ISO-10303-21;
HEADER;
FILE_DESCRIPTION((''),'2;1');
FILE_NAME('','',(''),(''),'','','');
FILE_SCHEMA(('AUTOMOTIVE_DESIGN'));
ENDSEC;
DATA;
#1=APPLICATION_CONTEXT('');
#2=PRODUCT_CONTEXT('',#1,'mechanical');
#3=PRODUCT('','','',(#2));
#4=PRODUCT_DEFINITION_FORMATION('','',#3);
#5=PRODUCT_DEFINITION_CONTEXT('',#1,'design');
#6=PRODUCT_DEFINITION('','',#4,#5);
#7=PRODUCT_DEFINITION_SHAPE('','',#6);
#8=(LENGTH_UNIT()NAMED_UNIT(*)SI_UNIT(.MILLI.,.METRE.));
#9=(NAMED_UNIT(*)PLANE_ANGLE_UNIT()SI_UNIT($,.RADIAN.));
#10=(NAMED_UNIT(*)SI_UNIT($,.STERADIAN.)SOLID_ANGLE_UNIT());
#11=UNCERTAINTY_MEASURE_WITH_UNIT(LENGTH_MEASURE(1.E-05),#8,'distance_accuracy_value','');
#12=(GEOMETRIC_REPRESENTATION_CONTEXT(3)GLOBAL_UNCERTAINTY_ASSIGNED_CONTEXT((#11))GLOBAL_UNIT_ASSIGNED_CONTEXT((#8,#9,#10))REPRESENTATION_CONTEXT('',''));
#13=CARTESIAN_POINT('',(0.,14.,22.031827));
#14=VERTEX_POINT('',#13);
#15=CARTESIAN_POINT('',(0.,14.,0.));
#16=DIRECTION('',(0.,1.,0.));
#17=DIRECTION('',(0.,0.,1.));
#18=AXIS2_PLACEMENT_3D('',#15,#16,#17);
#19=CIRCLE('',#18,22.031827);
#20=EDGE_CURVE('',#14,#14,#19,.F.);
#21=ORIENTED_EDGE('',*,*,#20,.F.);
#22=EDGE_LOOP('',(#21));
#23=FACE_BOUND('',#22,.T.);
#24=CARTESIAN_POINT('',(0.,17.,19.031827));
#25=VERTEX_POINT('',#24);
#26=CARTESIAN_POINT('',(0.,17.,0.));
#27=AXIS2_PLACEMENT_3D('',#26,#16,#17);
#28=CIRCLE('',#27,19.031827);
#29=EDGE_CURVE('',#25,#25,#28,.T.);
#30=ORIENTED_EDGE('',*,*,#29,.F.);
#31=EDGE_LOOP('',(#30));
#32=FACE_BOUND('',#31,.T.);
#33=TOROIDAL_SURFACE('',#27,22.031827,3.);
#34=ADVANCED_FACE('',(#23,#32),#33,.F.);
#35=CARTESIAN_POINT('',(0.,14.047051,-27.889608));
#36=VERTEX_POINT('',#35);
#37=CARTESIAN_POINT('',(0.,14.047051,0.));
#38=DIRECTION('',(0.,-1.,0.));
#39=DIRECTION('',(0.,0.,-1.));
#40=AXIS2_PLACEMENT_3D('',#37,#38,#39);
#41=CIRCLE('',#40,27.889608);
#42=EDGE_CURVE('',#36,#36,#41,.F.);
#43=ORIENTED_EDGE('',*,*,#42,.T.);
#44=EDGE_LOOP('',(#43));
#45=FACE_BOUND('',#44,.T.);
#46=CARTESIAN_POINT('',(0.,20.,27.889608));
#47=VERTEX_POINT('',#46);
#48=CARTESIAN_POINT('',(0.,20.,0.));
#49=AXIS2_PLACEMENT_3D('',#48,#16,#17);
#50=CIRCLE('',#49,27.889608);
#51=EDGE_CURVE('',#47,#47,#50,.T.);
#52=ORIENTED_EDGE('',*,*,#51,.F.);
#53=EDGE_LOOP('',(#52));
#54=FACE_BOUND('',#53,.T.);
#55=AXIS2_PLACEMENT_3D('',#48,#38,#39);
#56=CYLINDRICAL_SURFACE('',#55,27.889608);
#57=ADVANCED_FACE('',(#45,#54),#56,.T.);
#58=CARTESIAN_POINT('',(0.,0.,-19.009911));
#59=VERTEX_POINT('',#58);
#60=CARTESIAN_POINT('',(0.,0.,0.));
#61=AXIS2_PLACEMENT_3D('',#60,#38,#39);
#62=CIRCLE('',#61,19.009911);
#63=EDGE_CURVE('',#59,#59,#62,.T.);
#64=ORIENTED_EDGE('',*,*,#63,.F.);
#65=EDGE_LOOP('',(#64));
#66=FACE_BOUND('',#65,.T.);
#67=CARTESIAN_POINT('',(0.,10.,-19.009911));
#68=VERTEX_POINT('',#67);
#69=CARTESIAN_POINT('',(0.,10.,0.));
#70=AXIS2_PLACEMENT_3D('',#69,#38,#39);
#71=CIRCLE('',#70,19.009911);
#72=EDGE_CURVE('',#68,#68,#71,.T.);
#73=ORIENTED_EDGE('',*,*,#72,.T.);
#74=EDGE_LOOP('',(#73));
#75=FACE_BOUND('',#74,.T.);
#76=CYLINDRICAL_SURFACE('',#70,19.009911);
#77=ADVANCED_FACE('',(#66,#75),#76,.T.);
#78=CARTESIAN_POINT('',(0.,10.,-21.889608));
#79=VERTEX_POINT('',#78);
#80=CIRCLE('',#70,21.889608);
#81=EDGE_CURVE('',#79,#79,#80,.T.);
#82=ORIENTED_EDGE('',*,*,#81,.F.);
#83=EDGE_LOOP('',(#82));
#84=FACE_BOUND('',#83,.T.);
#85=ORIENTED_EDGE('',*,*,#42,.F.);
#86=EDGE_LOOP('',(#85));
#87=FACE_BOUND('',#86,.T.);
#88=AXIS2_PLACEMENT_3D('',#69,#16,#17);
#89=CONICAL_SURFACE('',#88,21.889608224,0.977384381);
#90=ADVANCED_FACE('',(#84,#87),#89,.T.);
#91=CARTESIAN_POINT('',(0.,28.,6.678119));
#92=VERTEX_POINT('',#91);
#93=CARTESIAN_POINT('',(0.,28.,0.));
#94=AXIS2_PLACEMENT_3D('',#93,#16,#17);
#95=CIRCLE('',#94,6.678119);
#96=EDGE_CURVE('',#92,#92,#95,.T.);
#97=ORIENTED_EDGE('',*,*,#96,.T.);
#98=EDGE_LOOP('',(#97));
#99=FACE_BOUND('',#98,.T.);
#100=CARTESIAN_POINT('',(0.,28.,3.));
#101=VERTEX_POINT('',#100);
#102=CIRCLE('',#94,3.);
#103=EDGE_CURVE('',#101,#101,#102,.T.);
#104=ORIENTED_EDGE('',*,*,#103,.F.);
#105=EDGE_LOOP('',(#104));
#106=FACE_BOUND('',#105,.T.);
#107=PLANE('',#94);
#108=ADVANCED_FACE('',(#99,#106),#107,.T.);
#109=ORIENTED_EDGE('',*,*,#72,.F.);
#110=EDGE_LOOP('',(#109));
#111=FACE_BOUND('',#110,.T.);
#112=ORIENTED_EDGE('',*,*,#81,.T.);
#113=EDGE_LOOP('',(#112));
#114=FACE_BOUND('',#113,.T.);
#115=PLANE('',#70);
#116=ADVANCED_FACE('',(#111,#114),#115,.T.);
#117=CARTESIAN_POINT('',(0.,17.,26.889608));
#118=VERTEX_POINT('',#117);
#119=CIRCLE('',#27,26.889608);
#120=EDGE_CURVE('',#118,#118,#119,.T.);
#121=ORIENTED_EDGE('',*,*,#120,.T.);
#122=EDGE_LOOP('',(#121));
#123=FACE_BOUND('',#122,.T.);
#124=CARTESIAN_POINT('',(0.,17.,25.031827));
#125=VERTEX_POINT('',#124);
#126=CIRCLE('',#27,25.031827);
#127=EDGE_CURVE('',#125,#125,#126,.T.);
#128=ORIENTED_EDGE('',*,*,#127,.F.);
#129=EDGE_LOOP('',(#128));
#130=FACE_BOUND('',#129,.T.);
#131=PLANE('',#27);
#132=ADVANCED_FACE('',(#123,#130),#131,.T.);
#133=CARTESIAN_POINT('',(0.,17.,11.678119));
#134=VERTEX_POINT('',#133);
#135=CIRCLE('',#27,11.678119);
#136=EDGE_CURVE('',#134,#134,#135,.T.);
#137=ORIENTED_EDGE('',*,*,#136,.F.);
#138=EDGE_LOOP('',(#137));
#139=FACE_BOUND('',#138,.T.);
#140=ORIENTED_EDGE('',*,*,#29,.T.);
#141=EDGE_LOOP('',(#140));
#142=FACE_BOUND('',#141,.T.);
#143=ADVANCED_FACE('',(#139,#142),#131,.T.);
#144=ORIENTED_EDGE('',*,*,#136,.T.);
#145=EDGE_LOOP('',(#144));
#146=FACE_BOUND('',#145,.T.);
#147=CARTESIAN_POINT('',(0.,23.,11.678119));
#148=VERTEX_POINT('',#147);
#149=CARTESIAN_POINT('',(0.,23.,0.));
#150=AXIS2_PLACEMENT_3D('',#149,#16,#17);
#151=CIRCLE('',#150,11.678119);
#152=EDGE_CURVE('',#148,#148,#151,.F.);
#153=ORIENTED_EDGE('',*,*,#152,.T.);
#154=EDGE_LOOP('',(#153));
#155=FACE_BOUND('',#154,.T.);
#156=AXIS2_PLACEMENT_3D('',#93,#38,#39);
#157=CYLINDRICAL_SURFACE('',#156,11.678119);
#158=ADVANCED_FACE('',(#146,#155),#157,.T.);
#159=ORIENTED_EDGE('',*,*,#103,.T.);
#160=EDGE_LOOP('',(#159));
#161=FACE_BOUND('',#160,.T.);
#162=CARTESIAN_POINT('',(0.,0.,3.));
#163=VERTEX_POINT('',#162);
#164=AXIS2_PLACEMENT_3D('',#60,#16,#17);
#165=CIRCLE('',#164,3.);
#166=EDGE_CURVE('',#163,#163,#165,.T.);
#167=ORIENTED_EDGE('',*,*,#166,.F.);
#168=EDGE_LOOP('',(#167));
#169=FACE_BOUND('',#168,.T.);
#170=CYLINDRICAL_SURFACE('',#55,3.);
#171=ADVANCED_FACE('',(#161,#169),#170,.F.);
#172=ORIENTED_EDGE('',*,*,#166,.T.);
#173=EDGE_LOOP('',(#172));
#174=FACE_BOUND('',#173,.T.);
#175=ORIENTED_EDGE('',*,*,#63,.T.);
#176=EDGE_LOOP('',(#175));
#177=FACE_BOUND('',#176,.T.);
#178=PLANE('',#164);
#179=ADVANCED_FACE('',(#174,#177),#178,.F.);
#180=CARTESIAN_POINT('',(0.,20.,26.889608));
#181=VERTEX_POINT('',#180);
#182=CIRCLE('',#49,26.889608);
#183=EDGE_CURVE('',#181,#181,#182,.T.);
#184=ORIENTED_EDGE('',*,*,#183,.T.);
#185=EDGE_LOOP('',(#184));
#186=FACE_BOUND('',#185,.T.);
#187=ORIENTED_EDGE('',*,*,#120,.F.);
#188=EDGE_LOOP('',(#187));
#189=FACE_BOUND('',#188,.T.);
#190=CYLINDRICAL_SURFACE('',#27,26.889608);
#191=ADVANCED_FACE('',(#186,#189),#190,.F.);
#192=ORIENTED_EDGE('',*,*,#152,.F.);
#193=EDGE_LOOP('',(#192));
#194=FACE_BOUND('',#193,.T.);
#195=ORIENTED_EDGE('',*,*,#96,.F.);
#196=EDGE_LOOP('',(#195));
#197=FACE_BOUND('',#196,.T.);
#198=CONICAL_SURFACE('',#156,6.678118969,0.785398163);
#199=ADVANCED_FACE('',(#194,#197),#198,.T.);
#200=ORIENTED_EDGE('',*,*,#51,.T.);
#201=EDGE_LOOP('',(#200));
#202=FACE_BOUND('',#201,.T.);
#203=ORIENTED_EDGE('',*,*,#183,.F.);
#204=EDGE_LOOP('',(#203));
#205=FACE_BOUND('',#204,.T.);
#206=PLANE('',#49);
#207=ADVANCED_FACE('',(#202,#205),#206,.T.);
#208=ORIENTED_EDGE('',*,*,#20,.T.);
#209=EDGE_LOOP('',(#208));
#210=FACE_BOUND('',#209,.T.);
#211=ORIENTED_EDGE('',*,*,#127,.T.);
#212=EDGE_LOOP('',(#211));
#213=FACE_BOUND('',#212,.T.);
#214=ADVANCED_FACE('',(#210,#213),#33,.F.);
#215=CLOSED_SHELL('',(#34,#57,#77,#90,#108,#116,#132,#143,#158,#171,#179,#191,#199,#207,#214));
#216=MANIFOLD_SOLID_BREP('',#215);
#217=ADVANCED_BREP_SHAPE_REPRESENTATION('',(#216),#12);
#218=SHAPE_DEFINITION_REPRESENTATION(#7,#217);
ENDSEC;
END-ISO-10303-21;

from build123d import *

# Parameters (mm, degrees)
SKETCH1_R           = 27.889608224
SKETCH1_R_2         = 3
BOSS_EXTRUDE1_DEPTH = 20
SKETCH2_R           = 26.889608224
CUT_EXTRUDE1_DEPTH  = 3
SKETCH2_5_R         = 25.031826588
SKETCH2_5_R_2       = 19.031826588
CUT_EXTRUDE2_DEPTH  = 6
FILLET1_R           = 3
SKETCH4_R           = 11.678118969
SKETCH4_R_2         = 3
BOSS_EXTRUDE2_DEPTH = 11
CHAMFER1_SIZE       = 5
SKETCH5_R           = 27.889608224
SKETCH5_R_2         = 19.009910513
CUT_EXTRUDE3_DEPTH  = 10
CHAMFER2_SIZE       = 6
CHAMFER2_SIZE2      = 4.047051101


with BuildPart() as part:
    # Sketch1 → Boss-Extrude1 (new body)
    with BuildSketch(Plane(origin=(0, 0, 0), x_dir=(1, 0, 0), z_dir=(0, 1, 0))):
        with Locations(Location((0, 0, 0), (0, 0, 270))):
            Circle(SKETCH1_R)
        with Locations(Location((0, 0, 0), (0, 0, 270))):
            Circle(SKETCH1_R_2, mode=Mode.SUBTRACT)
    extrude(amount=BOSS_EXTRUDE1_DEPTH)

    # Sketch2 → Cut-Extrude1 (cut)
    with BuildSketch(Plane(origin=(0, 20, 0), x_dir=(1, 0, 0), z_dir=(0, 1, 0))):
        with Locations(Location((0, 0, 0), (0, 0, 270))):
            Circle(SKETCH2_R)
    extrude(amount=-CUT_EXTRUDE1_DEPTH, mode=Mode.SUBTRACT)

    # Sketch2<5> → Cut-Extrude2 (cut)
    with BuildSketch(Plane(origin=(0, 20, 0), x_dir=(1, 0, 0), z_dir=(0, 1, 0))):
        with Locations(Location((0, 0, 0), (0, 0, 270))):
            Circle(SKETCH2_5_R)
        with Locations(Location((0, 0, 0), (0, 0, 270))):
            Circle(SKETCH2_5_R_2, mode=Mode.SUBTRACT)
    extrude(amount=-CUT_EXTRUDE2_DEPTH, mode=Mode.SUBTRACT)

    # Fillet1
    fillet1_edges = [part.edges().sort_by_distance(p)[0] for p in [
        (0, 14, -25.031826588),
        (0, 14, -19.031826588),
    ]]
    fillet(fillet1_edges, radius=FILLET1_R - 0.0001)  # a hair under: the kernel refuses the full size

    # Sketch4 → Boss-Extrude2 (add)
    with BuildSketch(Plane(origin=(0, 17, 0), x_dir=(1, 0, 0), z_dir=(0, 1, 0))):
        with Locations(Location((0, 0, 0), (0, 0, 270))):
            Circle(SKETCH4_R)
        with Locations(Location((0, 0, 0), (0, 0, 270))):
            Circle(SKETCH4_R_2, mode=Mode.SUBTRACT)
    extrude(amount=BOSS_EXTRUDE2_DEPTH)

    # Chamfer1
    chamfer1_edges = [part.edges().sort_by_distance(p)[0] for p in [
        (0, 28, -11.678118969),
    ]]
    chamfer(chamfer1_edges, length=CHAMFER1_SIZE)

    # Sketch5 → Cut-Extrude3 (cut)
    with BuildSketch(Plane.XZ):
        with Locations(Location((0, 0, 0), (0, 0, 270))):
            Circle(SKETCH5_R)
        with Locations(Location((0, 0, 0), (0, 0, 270))):
            Circle(SKETCH5_R_2, mode=Mode.SUBTRACT)
    extrude(amount=-CUT_EXTRUDE3_DEPTH, mode=Mode.SUBTRACT)

    # Chamfer2
    chamfer2_edges = [part.edges().sort_by_distance(p)[0] for p in [
        (0, 10, -27.889608224),
    ]]
    chamfer2_side = [part.faces().sort_by_distance(p)[0] for p in [
        (0, 10, -27.10077098),
    ]]
    chamfer(chamfer2_edges, length=CHAMFER2_SIZE, length2=CHAMFER2_SIZE2, reference=chamfer2_side[0])


solid = part.part
